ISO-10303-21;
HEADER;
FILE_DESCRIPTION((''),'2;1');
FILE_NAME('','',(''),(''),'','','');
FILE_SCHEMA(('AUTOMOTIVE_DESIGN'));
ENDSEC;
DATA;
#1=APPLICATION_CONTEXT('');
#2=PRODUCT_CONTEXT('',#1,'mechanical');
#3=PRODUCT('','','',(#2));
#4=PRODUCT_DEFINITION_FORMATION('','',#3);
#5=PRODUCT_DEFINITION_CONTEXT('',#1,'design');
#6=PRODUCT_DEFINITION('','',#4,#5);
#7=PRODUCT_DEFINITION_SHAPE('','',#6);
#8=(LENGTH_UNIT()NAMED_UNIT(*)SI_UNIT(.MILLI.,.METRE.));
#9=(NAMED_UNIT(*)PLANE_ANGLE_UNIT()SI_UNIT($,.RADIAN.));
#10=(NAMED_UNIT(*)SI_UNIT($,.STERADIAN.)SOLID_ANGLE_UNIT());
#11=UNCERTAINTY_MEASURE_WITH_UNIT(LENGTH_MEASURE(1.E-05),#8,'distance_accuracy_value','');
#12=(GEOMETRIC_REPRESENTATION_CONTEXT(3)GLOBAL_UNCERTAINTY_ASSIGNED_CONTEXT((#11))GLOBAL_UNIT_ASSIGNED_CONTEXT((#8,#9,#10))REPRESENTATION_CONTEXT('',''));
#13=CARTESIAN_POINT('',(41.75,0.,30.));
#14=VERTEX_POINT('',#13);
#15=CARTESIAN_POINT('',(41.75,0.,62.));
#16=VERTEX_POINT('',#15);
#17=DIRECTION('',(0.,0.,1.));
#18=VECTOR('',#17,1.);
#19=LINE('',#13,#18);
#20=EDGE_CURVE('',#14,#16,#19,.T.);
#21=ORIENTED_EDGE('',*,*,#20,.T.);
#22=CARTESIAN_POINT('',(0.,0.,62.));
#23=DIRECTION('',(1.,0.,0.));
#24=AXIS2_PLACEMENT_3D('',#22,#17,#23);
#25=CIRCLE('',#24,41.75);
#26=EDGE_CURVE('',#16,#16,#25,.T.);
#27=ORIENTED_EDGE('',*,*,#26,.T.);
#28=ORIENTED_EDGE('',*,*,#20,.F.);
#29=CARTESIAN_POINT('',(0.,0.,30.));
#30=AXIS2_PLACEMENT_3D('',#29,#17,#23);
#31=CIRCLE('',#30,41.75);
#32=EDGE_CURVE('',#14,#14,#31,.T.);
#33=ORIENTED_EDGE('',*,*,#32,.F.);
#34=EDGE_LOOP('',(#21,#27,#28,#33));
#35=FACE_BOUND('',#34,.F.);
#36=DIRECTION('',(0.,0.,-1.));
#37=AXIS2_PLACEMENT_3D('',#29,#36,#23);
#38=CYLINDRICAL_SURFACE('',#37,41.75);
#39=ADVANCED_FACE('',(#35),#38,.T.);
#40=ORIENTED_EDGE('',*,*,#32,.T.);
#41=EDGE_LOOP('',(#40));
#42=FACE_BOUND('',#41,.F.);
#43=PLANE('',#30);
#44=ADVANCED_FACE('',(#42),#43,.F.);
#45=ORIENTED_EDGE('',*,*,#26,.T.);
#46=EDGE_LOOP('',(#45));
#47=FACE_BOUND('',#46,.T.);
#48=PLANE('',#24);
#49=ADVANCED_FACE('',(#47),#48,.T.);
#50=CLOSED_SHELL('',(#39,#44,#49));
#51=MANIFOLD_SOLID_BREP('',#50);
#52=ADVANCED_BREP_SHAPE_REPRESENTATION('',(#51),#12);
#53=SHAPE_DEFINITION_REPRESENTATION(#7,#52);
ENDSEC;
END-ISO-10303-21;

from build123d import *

# Parameters (mm, degrees)
F0_R     = 41.75
F1_DEPTH = 32


# Not quite as in the source:
# - a feature of the source that left no trace in its solid (it failed there, or was rolled back) is left out
# - the program builds the solid bodies; features that only make, move or delete a surface that nothing else refers to are left out


with BuildPart() as f1:
    # F0 (on Top) → F1 (new body)
    with BuildSketch(Plane.XY):
        Circle(F0_R)
    extrude(amount=F1_DEPTH)


with BuildPart() as f1_1:
    # F3: moved
    add(f1.part.moved(Location((0, 0, 30))))


solid = f1_1.part
